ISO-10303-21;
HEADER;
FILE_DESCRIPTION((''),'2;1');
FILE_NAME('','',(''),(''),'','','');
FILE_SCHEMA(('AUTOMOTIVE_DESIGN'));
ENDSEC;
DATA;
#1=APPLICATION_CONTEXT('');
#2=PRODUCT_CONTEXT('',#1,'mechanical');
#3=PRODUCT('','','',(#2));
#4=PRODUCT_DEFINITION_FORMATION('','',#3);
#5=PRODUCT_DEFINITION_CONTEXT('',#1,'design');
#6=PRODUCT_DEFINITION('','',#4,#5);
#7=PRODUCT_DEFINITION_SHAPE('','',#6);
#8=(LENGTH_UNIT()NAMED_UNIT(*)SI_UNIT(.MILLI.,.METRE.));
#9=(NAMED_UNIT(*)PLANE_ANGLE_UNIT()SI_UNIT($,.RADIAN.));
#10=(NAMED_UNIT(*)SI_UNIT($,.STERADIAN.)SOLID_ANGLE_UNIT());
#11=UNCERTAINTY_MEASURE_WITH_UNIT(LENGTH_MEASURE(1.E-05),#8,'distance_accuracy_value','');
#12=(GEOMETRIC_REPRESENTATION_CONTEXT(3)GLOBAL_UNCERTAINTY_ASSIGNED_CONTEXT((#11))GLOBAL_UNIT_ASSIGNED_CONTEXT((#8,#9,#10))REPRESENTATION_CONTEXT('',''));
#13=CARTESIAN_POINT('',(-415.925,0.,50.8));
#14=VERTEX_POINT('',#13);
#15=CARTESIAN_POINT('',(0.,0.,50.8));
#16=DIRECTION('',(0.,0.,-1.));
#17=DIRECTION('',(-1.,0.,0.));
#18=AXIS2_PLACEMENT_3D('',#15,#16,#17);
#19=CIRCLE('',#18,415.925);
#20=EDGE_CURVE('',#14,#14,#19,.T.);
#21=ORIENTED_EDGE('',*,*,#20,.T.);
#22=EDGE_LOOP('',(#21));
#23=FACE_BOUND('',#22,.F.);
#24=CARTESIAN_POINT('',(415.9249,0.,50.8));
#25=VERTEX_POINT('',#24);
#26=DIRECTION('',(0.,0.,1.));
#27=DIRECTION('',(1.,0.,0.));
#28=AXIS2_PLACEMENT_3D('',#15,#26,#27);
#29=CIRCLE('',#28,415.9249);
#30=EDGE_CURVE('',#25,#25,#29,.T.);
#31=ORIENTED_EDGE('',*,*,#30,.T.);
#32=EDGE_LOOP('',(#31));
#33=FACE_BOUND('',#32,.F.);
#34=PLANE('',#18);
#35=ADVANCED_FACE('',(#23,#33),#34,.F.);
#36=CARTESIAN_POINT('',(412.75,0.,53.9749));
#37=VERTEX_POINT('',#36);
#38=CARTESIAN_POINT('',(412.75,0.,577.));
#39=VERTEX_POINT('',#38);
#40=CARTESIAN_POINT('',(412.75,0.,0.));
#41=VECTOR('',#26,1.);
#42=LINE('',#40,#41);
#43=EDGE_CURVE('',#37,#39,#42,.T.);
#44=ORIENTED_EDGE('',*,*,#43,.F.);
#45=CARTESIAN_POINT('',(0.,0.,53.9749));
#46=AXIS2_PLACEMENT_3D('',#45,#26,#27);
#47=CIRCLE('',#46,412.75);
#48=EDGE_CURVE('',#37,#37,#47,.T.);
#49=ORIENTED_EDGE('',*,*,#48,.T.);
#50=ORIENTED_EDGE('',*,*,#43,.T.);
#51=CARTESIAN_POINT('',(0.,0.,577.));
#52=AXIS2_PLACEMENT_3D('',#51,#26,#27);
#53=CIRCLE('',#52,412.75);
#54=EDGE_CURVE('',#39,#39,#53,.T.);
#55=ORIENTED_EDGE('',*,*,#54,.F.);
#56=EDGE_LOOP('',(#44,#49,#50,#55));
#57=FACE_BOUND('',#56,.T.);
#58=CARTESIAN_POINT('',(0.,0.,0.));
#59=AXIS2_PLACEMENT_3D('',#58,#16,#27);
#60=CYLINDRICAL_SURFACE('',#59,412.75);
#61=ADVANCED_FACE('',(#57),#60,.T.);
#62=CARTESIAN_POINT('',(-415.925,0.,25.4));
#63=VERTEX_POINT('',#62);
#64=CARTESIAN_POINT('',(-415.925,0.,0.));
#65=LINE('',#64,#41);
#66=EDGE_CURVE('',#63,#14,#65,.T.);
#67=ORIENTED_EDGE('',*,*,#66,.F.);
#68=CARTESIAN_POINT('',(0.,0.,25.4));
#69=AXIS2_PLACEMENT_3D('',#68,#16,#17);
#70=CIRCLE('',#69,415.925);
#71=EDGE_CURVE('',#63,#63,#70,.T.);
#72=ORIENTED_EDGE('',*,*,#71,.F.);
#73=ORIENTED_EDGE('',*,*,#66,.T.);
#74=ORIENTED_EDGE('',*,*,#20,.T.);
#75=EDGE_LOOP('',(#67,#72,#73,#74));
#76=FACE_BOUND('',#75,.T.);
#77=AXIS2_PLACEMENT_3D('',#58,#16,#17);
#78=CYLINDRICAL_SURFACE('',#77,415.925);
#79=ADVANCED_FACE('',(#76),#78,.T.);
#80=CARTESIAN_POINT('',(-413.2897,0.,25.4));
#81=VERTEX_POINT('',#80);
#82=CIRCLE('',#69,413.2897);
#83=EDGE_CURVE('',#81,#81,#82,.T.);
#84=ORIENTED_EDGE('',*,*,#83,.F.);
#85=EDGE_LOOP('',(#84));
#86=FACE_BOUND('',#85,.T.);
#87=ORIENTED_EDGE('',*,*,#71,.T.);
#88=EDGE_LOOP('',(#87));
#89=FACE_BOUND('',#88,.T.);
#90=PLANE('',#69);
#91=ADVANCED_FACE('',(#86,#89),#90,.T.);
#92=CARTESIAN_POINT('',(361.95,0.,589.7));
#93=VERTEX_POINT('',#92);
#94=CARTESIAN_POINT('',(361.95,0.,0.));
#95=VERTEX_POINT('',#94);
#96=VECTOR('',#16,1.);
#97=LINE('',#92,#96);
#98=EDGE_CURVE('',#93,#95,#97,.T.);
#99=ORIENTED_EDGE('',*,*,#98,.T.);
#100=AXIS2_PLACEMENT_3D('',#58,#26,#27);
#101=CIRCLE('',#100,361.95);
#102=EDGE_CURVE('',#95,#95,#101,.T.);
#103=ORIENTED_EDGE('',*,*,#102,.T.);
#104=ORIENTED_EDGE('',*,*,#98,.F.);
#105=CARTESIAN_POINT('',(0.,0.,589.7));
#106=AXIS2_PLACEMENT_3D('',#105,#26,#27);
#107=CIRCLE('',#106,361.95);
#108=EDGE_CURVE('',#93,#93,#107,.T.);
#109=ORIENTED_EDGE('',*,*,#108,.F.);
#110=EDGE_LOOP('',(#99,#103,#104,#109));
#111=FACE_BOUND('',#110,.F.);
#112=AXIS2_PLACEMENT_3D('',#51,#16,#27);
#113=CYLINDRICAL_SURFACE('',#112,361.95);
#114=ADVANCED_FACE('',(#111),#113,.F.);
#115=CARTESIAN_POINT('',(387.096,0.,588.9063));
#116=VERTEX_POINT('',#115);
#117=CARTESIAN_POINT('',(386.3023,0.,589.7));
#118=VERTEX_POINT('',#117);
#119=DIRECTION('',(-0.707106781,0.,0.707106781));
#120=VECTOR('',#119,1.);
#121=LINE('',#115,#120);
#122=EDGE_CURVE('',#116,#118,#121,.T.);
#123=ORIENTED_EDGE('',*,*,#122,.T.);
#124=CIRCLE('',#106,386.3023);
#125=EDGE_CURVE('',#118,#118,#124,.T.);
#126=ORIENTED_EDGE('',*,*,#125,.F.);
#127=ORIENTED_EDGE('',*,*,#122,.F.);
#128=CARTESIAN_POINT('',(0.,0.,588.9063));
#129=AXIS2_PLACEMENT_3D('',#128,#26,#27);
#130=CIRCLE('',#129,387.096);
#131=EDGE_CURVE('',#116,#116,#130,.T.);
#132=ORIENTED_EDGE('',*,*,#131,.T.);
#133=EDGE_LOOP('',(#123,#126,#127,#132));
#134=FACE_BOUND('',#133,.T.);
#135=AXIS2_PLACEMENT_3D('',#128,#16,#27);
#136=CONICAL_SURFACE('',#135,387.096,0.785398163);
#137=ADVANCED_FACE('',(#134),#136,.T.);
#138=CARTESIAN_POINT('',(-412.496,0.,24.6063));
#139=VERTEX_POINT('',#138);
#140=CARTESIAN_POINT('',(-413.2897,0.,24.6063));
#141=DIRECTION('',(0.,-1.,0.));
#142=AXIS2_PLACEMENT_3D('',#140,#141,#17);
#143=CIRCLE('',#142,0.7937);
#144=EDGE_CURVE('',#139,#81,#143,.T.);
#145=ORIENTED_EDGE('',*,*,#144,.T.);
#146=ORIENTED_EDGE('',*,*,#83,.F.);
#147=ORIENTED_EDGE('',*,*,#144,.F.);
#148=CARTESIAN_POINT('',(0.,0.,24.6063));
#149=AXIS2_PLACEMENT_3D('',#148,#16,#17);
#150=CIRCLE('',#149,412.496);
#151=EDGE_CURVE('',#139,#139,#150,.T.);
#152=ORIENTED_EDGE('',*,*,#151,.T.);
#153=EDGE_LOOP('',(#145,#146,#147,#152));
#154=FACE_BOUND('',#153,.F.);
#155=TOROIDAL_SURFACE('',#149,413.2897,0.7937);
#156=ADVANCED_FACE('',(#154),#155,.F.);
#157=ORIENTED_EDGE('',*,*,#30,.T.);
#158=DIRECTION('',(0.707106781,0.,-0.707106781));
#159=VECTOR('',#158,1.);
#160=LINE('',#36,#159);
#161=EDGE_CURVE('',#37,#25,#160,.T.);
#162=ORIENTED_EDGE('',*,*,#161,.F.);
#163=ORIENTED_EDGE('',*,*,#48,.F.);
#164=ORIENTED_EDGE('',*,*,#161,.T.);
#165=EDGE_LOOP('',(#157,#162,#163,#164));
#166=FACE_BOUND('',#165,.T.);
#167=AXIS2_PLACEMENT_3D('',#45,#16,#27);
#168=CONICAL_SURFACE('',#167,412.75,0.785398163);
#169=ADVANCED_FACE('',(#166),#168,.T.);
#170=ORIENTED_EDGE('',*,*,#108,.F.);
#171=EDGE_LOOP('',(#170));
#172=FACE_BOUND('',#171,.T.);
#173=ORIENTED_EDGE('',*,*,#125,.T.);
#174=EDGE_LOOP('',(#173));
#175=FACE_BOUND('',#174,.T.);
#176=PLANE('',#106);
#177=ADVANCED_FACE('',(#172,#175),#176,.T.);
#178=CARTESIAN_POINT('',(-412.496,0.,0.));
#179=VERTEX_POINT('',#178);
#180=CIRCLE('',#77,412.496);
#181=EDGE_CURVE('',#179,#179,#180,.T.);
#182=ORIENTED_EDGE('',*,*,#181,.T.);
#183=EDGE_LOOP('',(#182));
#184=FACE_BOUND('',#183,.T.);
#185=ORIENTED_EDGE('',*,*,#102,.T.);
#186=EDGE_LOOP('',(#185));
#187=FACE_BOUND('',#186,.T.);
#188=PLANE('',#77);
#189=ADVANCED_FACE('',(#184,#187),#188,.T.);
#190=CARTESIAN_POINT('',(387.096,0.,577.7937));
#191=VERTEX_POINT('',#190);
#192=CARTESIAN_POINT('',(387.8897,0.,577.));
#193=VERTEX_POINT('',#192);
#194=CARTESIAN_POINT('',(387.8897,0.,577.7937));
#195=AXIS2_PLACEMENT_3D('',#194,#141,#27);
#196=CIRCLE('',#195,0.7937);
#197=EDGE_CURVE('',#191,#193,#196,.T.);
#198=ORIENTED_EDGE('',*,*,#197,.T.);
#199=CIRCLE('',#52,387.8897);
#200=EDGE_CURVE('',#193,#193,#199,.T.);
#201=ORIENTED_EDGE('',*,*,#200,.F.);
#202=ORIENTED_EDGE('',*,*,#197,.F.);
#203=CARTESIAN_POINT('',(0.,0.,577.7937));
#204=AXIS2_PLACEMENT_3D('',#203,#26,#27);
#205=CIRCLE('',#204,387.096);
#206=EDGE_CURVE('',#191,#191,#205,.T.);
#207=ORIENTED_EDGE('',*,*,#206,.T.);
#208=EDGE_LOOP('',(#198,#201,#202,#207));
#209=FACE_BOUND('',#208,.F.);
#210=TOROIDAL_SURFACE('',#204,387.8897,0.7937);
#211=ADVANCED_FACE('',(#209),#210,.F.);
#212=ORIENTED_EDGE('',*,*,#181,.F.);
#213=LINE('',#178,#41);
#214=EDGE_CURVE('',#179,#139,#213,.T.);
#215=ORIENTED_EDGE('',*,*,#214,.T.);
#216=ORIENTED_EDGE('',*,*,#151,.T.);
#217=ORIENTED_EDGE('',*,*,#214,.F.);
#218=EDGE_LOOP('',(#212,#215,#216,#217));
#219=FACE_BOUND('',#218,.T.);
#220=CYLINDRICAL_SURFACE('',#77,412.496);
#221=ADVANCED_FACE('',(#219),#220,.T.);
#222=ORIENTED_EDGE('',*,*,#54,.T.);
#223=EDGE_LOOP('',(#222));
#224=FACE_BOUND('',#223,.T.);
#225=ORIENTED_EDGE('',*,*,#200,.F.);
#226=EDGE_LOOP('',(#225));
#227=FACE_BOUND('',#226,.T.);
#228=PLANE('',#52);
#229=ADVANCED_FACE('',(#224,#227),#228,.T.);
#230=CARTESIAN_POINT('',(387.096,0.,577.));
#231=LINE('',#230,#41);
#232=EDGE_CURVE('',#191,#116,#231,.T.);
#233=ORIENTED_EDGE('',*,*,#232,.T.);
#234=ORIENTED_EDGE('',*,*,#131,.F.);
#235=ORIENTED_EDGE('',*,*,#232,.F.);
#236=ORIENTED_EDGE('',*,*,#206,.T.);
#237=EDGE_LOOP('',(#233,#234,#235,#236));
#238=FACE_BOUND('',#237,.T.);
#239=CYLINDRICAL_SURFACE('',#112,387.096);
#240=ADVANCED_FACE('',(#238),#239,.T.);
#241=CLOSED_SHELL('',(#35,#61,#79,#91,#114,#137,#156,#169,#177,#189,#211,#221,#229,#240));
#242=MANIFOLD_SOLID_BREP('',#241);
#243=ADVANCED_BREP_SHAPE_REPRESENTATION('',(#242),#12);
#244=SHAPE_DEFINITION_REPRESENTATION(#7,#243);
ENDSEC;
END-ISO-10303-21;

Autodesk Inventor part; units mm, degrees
ref_plane "YZ Plane" through (0, 0, 0) normal (1, 0, 0) x (0, 1, 0)
ref_plane "XZ Plane" through (0, 0, 0) normal (0, 1, 0) x (-1, 0, 0)
ref_plane "XY Plane" through (0, 0, 0) normal (0, 0, 1) x (1, 0, 0)
sketch "Sketch1" plane through (0, 0, 0) normal (0, 0, 1) x (1, 0, 0)
  circle A0 centre (0, 0) radius 361.95
  circle A1 centre (0, 0) radius 412.75
  dimension "d0" = 723.9
  dimension "d1" = 825.5
extrude "Extrusion1" add sketch "Sketch1" along normal blind 577
sketch "Sketch2" plane through (0, 0, 0) normal (0, 0, -1) x (-1, 0, 0)
  circle A0 centre (0, 0) radius 412.75 projected
  circle A1 centre (0, 0) radius 415.925
  dimension "d4" = 831.85
extrude "Extrusion2" add sketch "Sketch2" against normal blind 50.8
sketch "Sketch3" plane through (0, 0, 0) normal (0, 0, -1) x (-1, 0, 0)
  circle A0 centre (0, 0) radius 415.925 projected
  circle A1 centre (0, 0) radius 412.496
  dimension "d7" = 824.992
extrude "Extrusion3" cut sketch "Sketch3" against normal blind 25.4
chamfer "Chamfer1" distance 3.175 angle 45 1 edges at (-412.75, 0, 50.8)
sketch "Sketch4" plane through (0, 0, 577) normal (0, 0, 1) x (1, 0, 0)
  circle A0 centre (0, 0) radius 361.95 projected
  circle A1 centre (0, 0) radius 387.096
  dimension "d13" = 774.192
extrude "Extrusion4" add sketch "Sketch4" along normal blind 12.7
fillet "Fillet1" radius 0.7937 2 edges at (-387.096, 0, 577) (412.496, 0, 25.4)
chamfer "Chamfer2" distance 0.7937 angle 45 1 edges at (-387.096, 0, 589.7)
equation "\"d10\" = -0.5 * d1 + 0.5 * d4"
properties part number "A1-19027-100-06 HCWI liner - pup" material "Iron, HCWI"
